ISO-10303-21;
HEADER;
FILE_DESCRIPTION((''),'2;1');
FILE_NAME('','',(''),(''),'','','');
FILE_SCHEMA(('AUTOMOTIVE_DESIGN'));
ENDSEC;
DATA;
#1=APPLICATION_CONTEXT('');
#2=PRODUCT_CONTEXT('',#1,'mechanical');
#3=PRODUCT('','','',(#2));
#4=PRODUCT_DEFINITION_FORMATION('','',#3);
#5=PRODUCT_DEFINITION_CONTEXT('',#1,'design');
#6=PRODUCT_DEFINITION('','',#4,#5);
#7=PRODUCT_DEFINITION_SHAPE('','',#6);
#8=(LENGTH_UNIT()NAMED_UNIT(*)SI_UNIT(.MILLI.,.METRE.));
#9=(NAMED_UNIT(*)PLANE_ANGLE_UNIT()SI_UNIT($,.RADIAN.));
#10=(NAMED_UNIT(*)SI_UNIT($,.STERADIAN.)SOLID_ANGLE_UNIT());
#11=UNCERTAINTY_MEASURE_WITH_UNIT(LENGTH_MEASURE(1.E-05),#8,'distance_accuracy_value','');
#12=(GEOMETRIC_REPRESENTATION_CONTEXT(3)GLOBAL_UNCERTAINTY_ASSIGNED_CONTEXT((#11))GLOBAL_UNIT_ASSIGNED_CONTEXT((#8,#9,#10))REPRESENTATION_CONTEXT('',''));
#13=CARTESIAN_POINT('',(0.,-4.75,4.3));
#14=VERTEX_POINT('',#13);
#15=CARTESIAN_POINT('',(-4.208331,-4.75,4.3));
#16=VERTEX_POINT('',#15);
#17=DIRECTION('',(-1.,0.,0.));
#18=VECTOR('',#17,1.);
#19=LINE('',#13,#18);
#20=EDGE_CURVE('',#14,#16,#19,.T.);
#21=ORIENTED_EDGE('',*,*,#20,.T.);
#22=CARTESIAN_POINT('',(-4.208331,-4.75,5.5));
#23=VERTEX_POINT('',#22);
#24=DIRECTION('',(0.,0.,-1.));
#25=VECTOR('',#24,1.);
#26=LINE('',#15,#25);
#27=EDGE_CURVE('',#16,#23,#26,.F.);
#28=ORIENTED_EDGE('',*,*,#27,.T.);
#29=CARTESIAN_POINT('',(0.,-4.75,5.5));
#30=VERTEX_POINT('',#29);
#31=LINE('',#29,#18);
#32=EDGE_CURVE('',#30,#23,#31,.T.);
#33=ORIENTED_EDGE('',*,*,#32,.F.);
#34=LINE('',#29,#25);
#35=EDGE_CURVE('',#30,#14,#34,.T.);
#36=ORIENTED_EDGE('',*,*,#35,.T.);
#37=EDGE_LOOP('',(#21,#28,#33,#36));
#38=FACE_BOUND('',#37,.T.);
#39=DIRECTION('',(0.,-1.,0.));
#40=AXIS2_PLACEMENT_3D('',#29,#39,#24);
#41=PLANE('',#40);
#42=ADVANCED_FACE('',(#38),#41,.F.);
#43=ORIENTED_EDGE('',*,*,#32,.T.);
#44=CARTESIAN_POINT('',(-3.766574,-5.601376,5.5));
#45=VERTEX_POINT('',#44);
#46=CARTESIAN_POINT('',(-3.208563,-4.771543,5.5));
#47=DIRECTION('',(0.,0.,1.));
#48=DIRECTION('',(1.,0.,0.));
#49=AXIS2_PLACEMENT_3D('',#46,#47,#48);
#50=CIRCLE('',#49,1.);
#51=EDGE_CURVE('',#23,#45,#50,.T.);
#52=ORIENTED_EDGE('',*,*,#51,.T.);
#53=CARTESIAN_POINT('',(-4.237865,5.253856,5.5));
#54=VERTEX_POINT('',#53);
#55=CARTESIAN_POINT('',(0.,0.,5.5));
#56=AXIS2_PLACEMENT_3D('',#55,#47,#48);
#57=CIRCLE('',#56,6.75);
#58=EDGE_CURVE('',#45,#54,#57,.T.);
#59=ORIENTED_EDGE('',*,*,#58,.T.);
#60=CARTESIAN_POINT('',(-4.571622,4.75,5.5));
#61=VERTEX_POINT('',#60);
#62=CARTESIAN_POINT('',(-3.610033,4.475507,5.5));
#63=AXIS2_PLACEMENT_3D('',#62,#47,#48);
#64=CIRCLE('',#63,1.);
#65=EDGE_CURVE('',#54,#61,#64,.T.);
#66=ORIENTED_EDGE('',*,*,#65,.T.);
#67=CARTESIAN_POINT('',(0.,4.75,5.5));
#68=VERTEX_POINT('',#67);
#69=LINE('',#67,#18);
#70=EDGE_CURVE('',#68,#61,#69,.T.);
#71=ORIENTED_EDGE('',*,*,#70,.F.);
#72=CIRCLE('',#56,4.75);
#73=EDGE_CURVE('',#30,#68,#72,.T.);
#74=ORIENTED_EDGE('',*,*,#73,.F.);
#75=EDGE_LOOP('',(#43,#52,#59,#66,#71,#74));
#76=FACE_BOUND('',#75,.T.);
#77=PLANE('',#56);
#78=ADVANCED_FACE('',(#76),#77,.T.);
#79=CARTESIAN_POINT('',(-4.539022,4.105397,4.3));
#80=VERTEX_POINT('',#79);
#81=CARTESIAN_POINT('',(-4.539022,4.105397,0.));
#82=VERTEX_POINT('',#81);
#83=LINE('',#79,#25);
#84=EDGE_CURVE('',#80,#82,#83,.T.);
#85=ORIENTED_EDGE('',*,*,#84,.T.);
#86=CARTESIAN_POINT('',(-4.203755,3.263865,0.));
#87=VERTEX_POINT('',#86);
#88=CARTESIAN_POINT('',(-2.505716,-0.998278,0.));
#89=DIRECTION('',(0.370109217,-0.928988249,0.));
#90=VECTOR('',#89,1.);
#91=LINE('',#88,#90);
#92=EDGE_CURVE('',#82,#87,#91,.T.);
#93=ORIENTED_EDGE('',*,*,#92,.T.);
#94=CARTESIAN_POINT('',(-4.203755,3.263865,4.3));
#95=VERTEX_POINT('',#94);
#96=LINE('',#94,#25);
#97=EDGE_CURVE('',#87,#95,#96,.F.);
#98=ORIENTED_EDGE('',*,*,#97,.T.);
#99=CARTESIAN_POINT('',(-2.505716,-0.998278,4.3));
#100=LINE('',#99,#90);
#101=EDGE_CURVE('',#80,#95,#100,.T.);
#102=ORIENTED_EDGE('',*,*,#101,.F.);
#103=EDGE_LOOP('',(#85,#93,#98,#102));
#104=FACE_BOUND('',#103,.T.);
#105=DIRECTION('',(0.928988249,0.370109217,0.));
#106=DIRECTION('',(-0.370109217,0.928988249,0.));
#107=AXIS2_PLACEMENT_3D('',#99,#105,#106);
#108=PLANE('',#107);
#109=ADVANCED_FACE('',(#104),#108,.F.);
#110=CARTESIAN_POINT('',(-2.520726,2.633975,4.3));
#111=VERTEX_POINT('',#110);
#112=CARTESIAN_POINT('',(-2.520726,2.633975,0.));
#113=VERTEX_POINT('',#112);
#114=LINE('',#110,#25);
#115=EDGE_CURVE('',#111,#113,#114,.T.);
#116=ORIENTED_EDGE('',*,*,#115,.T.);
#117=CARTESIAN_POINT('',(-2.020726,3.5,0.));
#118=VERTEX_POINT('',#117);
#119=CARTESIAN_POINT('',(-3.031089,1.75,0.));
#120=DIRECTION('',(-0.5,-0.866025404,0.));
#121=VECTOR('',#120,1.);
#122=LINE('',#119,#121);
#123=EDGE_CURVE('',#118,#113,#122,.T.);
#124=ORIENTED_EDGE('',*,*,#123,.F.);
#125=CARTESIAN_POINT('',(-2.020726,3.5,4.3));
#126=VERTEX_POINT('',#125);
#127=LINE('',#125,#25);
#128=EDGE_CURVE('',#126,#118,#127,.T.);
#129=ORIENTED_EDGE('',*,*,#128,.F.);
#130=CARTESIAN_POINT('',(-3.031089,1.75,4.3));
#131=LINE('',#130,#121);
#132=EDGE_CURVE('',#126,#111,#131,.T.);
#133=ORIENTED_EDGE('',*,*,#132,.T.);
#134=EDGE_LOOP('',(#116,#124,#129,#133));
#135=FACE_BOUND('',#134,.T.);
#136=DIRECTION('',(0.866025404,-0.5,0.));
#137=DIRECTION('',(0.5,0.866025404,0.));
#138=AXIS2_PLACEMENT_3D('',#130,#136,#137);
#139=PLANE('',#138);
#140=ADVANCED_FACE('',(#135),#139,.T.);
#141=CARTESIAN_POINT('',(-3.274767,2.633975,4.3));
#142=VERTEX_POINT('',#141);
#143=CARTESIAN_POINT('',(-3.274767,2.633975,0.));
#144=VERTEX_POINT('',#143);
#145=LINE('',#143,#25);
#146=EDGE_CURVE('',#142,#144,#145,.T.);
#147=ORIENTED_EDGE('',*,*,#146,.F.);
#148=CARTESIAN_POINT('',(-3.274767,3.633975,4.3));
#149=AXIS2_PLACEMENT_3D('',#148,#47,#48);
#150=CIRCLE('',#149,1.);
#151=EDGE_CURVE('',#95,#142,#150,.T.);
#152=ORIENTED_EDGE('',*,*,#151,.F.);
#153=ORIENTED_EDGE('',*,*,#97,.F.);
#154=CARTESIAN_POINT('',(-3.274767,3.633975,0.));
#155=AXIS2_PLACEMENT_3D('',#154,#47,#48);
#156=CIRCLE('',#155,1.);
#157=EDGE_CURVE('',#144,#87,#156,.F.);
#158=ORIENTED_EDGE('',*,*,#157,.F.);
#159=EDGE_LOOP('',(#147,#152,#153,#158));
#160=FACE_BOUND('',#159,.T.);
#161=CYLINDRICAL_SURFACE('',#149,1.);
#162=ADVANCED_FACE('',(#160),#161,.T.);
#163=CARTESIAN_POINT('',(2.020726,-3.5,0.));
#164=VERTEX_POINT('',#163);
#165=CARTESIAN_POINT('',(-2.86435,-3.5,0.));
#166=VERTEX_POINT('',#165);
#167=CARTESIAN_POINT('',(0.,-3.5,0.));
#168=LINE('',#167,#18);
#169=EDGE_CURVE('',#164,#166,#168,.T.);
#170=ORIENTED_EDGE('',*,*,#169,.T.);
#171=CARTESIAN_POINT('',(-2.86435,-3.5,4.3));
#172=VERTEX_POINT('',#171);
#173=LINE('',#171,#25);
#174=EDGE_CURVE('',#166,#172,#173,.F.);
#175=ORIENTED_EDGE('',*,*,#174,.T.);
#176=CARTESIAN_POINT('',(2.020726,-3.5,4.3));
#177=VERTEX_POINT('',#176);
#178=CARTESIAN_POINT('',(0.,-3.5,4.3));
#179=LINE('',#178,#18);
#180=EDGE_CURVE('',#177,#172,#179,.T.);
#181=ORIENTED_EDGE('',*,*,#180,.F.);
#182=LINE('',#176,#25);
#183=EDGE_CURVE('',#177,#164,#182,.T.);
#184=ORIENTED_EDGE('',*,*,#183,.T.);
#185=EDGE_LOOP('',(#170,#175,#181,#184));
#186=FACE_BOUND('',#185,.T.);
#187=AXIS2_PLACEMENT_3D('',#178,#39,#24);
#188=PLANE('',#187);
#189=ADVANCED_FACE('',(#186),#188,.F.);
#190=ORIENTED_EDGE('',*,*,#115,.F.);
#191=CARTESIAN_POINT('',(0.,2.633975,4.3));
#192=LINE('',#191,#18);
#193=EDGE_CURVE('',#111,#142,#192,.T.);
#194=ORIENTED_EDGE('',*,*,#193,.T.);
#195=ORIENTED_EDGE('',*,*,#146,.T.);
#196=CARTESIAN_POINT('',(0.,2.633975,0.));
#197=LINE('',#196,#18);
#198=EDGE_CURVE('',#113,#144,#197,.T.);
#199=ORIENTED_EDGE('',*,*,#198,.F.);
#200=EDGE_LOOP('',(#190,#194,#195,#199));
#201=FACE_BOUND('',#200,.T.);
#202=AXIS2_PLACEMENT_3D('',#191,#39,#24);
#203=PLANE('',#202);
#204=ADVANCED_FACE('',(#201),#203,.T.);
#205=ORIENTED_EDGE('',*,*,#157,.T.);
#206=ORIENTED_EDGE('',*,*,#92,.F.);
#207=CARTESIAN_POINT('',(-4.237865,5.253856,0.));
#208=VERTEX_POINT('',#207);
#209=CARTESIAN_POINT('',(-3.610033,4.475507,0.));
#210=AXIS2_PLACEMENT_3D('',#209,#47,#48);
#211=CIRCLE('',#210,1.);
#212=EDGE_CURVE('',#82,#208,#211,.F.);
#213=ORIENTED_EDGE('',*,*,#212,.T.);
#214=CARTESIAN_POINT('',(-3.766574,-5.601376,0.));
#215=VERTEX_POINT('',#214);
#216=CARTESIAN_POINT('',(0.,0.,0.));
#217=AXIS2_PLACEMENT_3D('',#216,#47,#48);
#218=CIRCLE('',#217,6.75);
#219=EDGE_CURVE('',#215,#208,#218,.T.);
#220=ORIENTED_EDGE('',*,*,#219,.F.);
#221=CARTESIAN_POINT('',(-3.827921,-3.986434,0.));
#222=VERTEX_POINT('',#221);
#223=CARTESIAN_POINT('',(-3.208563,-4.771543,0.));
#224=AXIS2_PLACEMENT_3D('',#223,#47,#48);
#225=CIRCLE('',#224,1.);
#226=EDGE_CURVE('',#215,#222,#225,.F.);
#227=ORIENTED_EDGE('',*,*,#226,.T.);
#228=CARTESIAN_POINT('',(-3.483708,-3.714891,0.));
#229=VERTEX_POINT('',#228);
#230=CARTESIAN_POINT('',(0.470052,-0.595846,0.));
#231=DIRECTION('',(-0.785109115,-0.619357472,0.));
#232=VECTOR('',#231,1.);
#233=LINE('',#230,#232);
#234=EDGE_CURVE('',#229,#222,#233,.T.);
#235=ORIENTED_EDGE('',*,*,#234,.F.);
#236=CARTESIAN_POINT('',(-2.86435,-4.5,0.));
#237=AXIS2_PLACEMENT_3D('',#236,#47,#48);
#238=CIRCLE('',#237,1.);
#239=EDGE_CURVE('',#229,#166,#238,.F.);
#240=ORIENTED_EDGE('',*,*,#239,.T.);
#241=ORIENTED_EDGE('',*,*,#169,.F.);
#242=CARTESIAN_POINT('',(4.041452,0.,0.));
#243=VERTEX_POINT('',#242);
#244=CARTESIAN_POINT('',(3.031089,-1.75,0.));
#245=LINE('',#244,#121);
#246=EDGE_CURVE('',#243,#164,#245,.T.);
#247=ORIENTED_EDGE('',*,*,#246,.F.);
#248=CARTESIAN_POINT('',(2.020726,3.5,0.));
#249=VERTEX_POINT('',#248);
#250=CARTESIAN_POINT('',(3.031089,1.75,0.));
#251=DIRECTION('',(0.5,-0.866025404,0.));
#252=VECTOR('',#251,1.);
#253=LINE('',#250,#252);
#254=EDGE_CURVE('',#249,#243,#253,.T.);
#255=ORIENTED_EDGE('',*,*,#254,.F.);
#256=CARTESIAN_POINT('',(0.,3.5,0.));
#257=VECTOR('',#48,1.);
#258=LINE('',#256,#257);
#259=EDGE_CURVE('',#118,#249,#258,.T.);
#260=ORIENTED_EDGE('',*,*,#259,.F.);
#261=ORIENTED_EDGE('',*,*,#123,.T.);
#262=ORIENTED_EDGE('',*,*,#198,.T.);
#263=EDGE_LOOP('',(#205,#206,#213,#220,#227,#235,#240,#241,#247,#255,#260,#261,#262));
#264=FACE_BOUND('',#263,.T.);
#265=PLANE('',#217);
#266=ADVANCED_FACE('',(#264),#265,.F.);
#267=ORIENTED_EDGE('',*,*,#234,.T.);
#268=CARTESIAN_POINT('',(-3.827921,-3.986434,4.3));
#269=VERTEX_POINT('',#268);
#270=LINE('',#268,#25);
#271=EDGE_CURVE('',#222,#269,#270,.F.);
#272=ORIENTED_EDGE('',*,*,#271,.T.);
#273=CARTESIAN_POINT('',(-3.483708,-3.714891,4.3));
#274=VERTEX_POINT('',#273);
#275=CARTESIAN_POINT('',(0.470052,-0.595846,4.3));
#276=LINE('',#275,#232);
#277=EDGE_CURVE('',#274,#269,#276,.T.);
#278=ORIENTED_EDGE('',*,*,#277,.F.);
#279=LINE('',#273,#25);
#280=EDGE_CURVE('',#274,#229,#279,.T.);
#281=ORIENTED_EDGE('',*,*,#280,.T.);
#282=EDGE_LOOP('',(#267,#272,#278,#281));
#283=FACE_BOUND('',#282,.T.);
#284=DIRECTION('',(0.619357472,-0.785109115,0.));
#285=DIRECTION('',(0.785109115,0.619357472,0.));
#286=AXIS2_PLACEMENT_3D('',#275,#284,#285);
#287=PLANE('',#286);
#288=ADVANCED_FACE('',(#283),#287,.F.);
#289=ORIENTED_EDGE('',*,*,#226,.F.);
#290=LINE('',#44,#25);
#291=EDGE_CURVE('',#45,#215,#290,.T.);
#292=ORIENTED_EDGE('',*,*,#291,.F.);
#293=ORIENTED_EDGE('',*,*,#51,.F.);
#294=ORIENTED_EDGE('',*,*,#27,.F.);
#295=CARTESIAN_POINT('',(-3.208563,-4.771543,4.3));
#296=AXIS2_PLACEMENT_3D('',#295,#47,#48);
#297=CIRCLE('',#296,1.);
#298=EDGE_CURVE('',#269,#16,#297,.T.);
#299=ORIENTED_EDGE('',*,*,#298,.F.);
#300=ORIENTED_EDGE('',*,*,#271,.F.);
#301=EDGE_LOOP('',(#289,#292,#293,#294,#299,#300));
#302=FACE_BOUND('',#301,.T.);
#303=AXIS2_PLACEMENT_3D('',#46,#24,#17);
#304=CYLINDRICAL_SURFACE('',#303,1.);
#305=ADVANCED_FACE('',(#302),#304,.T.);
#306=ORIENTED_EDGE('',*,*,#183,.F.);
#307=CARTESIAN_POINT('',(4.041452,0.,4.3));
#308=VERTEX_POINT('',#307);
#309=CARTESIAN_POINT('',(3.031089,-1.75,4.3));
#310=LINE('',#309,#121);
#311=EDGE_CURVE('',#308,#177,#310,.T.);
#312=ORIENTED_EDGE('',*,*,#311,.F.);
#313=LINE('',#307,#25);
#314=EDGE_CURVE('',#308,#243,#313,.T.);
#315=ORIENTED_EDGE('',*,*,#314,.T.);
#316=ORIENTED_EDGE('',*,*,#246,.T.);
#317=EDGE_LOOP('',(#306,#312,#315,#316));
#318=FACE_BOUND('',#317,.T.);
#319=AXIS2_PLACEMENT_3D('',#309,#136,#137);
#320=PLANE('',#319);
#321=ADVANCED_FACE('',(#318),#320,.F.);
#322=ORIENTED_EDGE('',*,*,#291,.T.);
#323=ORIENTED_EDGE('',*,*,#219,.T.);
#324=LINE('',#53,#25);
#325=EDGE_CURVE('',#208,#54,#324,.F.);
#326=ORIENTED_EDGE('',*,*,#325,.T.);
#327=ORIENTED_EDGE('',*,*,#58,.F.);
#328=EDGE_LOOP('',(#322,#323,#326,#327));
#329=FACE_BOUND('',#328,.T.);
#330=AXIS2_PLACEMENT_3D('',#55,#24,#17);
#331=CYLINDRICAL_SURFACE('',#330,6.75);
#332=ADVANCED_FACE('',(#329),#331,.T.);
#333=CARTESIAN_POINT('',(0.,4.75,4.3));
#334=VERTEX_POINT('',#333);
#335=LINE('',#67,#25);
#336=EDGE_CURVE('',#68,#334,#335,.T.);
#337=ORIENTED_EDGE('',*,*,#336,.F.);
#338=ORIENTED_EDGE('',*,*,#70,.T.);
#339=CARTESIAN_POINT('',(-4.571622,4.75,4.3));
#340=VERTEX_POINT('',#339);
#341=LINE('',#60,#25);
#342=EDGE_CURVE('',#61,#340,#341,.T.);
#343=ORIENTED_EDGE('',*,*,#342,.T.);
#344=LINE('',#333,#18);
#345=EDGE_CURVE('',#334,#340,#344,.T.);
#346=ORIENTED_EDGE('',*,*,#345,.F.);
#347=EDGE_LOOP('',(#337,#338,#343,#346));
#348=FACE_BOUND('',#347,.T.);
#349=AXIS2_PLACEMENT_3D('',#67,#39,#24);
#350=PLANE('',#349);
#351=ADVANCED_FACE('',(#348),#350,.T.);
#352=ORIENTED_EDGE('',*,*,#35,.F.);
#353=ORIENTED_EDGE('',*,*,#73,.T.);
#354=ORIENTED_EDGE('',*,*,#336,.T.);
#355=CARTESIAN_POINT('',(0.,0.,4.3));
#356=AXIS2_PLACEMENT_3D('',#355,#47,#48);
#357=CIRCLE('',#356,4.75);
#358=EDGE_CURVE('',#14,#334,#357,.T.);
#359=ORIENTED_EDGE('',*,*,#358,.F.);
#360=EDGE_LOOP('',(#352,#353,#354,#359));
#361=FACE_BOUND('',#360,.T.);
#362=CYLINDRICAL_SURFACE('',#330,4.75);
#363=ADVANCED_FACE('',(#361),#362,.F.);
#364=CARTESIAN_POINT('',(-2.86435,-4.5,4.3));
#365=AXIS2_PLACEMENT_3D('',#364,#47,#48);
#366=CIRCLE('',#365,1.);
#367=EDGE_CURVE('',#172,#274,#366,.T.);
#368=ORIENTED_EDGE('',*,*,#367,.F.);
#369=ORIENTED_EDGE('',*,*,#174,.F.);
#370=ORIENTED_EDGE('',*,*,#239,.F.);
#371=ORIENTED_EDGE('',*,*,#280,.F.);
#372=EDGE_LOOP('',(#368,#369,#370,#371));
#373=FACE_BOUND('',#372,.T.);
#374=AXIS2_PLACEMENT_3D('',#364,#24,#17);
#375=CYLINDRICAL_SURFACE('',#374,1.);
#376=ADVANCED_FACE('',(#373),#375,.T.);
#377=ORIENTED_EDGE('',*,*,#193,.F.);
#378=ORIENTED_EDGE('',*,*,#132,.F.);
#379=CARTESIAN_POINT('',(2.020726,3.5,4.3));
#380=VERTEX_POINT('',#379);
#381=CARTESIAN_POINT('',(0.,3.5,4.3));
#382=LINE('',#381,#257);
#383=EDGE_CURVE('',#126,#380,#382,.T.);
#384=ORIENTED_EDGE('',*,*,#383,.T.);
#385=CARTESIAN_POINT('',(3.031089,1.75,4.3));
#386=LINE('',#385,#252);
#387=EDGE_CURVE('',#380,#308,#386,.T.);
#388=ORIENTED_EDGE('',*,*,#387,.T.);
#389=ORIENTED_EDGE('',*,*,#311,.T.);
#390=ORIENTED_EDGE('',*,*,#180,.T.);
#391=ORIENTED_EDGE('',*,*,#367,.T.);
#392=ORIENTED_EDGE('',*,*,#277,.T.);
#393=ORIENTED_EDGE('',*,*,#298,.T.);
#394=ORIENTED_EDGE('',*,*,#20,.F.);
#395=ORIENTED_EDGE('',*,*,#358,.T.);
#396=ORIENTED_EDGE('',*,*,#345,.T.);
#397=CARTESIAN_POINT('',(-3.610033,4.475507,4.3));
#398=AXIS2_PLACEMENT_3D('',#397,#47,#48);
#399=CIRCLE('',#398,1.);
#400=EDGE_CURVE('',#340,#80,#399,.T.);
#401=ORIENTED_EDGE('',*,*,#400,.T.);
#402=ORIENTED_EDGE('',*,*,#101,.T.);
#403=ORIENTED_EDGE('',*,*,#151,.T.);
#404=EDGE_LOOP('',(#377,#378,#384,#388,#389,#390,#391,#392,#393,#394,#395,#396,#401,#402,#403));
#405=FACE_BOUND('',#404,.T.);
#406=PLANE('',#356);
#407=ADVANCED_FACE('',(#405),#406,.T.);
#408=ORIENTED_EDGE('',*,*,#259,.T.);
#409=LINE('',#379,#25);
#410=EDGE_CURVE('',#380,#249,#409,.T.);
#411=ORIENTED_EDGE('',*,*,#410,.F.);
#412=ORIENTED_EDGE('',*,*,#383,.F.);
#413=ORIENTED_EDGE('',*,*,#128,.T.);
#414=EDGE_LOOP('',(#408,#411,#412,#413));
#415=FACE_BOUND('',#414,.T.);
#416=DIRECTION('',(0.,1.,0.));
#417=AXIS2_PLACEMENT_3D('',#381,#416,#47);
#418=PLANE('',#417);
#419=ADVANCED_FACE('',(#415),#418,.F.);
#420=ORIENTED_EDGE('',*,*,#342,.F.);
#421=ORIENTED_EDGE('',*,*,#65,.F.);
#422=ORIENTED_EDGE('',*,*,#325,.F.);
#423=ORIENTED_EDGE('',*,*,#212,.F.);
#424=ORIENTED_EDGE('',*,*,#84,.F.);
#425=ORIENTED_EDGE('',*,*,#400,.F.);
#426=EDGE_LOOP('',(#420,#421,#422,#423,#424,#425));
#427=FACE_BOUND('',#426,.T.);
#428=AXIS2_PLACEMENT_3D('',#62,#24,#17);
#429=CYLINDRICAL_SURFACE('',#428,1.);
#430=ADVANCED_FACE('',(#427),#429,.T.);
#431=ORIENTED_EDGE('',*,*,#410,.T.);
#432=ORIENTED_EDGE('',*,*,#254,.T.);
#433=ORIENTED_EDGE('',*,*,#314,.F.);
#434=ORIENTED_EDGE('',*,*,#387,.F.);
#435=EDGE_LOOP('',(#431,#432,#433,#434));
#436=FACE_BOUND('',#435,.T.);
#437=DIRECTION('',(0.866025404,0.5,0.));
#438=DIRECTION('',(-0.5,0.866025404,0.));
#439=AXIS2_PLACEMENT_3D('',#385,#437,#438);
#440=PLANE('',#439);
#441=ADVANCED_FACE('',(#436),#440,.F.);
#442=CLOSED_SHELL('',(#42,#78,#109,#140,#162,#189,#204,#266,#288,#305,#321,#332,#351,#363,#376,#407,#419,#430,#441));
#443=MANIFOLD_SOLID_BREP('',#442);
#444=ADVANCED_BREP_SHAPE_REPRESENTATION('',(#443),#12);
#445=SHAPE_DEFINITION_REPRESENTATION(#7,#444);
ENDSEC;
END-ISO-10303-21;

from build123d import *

# Parameters (mm, degrees)
BOSS_EXTRUDE1_DEPTH = 4.3
BOSS_EXTRUDE4_DEPTH = 5.5
FILLET4_R           = 1


with BuildPart() as part:
    # Sketch1 → Boss-Extrude1 (new body)
    with BuildSketch(Plane.XY):
        with BuildLine():
            Line((-2.020725942, -3.5), (-3.211308145, -3.5))
            ThreePointArc((-3.211308145, -3.5), (4.715670166, 0.570048145), (-3.952806323, 2.633974596))
            Line((-3.952806323, 2.633974596), (-2.520725942, 2.633974596))
            Line((-2.520725942, 2.633974596), (-2.020725942, 3.5))
            Line((-2.020725942, 3.5), (2.020725942, 3.5))
            Line((2.020725942, 3.5), (4.041451884, 0))
            Line((4.041451884, 0), (2.020725942, -3.5))
            Line((2.020725942, -3.5), (-2.020725942, -3.5))
        make_face()
        with BuildLine():
            Line((-4.795831523, 4.75), (-3.952806323, 2.633974596))
            ThreePointArc((-3.952806323, 2.633974596), (-2.241776156, 4.18771294), (0, 4.75))
            Line((0, 4.75), (-4.795831523, 4.75))
        make_face()
        with BuildLine():
            Line((-3.211308145, -3.5), (-4.795831523, -4.75))
            Line((-4.795831523, -4.75), (0, -4.75))
            ThreePointArc((0, -4.75), (-1.723006094, -4.426482802), (-3.211308145, -3.5))
        make_face()
    extrude(amount=BOSS_EXTRUDE1_DEPTH)

    # Sketch1<6> → Boss-Extrude4 (add)
    with BuildSketch(Plane.XY):
        with BuildLine():
            ThreePointArc((-4.795831523, -4.75), (6.75, 0), (-4.795831523, 4.75))
            Line((-4.795831523, 4.75), (0, 4.75))
            ThreePointArc((0, 4.75), (4.75, 0), (0, -4.75))
            Line((0, -4.75), (-4.795831523, -4.75))
        make_face()
    extrude(amount=BOSS_EXTRUDE4_DEPTH)

    # Fillet4
    # the kernel refuses this fillet: 1 mm, written as the material it takes off along each edge
    with BuildSketch(Plane(origin=(-4.795831523, -4.75, -3.339360347), x_dir=(0.7851091148875305, 0.6193574716757022, 0), z_dir=(0, 0, 1))) as fillet4_piece_1:
        with BuildLine():
            CenterArc((1.232836015, -1), FILLET4_R, 90, 107.81241463)
            ThreePointArc((0.280772882, -1.305901602), (0.108004206, -0.659913081), (0, 0))
            Line((0, 0), (1.232836015, 0))
        make_face()
    extrude(amount=10.978720693, mode=Mode.SUBTRACT)
    with BuildSketch(Plane(origin=(-3.211308145, -3.5, -0.867394417), x_dir=(1, 0, 0), z_dir=(0, 0, 1))) as fillet4_piece_2:
        with BuildLine():
            CenterArc((FILLET4_R * 0.346957766621, -FILLET4_R), FILLET4_R, 90, 38.269228819)
            Line((-FILLET4_R * 0.272399705055, -FILLET4_R * 0.214890885112), (0, 0))
            Line((0, 0), (FILLET4_R * 0.346957766621, 0))
        make_face()
    extrude(amount=6.034788833, mode=Mode.SUBTRACT)
    with BuildSketch(Plane(origin=(-3.952806323, 2.633974596, -1.695098898), x_dir=(-0.37010921689998283, 0.9289882494228232, 0), z_dir=(0, 0, 1))) as fillet4_piece_3:
        with BuildLine():
            CenterArc((FILLET4_R * 0.678039559156, -FILLET4_R), FILLET4_R, 90, 68.277646872)
            Line((-FILLET4_R * 0.250948690267, -FILLET4_R * 0.6298907831), (0, 0))
            Line((0, 0), (FILLET4_R * 0.678039559156, 0))
        make_face()
    extrude(amount=7.690197796, mode=Mode.SUBTRACT)
    with BuildSketch(Plane(origin=(-4.795831523, 4.75, -1.879489211), x_dir=(0.7421780572784941, 0.6702027538695439, 0), z_dir=(0, 0, 1))) as fillet4_piece_4:
        with BuildLine():
            CenterArc((0.696107115, -0.998448188), FILLET4_R, 86.807628526, 72.832009231)
            Line((-0.241415796, -0.650524644), (0, 0))
            ThreePointArc((0, 0), (0.375897842, 0.010474734), (0.751795684, 0))
        make_face()
    extrude(amount=8.058978421, mode=Mode.SUBTRACT)


solid = part.part
